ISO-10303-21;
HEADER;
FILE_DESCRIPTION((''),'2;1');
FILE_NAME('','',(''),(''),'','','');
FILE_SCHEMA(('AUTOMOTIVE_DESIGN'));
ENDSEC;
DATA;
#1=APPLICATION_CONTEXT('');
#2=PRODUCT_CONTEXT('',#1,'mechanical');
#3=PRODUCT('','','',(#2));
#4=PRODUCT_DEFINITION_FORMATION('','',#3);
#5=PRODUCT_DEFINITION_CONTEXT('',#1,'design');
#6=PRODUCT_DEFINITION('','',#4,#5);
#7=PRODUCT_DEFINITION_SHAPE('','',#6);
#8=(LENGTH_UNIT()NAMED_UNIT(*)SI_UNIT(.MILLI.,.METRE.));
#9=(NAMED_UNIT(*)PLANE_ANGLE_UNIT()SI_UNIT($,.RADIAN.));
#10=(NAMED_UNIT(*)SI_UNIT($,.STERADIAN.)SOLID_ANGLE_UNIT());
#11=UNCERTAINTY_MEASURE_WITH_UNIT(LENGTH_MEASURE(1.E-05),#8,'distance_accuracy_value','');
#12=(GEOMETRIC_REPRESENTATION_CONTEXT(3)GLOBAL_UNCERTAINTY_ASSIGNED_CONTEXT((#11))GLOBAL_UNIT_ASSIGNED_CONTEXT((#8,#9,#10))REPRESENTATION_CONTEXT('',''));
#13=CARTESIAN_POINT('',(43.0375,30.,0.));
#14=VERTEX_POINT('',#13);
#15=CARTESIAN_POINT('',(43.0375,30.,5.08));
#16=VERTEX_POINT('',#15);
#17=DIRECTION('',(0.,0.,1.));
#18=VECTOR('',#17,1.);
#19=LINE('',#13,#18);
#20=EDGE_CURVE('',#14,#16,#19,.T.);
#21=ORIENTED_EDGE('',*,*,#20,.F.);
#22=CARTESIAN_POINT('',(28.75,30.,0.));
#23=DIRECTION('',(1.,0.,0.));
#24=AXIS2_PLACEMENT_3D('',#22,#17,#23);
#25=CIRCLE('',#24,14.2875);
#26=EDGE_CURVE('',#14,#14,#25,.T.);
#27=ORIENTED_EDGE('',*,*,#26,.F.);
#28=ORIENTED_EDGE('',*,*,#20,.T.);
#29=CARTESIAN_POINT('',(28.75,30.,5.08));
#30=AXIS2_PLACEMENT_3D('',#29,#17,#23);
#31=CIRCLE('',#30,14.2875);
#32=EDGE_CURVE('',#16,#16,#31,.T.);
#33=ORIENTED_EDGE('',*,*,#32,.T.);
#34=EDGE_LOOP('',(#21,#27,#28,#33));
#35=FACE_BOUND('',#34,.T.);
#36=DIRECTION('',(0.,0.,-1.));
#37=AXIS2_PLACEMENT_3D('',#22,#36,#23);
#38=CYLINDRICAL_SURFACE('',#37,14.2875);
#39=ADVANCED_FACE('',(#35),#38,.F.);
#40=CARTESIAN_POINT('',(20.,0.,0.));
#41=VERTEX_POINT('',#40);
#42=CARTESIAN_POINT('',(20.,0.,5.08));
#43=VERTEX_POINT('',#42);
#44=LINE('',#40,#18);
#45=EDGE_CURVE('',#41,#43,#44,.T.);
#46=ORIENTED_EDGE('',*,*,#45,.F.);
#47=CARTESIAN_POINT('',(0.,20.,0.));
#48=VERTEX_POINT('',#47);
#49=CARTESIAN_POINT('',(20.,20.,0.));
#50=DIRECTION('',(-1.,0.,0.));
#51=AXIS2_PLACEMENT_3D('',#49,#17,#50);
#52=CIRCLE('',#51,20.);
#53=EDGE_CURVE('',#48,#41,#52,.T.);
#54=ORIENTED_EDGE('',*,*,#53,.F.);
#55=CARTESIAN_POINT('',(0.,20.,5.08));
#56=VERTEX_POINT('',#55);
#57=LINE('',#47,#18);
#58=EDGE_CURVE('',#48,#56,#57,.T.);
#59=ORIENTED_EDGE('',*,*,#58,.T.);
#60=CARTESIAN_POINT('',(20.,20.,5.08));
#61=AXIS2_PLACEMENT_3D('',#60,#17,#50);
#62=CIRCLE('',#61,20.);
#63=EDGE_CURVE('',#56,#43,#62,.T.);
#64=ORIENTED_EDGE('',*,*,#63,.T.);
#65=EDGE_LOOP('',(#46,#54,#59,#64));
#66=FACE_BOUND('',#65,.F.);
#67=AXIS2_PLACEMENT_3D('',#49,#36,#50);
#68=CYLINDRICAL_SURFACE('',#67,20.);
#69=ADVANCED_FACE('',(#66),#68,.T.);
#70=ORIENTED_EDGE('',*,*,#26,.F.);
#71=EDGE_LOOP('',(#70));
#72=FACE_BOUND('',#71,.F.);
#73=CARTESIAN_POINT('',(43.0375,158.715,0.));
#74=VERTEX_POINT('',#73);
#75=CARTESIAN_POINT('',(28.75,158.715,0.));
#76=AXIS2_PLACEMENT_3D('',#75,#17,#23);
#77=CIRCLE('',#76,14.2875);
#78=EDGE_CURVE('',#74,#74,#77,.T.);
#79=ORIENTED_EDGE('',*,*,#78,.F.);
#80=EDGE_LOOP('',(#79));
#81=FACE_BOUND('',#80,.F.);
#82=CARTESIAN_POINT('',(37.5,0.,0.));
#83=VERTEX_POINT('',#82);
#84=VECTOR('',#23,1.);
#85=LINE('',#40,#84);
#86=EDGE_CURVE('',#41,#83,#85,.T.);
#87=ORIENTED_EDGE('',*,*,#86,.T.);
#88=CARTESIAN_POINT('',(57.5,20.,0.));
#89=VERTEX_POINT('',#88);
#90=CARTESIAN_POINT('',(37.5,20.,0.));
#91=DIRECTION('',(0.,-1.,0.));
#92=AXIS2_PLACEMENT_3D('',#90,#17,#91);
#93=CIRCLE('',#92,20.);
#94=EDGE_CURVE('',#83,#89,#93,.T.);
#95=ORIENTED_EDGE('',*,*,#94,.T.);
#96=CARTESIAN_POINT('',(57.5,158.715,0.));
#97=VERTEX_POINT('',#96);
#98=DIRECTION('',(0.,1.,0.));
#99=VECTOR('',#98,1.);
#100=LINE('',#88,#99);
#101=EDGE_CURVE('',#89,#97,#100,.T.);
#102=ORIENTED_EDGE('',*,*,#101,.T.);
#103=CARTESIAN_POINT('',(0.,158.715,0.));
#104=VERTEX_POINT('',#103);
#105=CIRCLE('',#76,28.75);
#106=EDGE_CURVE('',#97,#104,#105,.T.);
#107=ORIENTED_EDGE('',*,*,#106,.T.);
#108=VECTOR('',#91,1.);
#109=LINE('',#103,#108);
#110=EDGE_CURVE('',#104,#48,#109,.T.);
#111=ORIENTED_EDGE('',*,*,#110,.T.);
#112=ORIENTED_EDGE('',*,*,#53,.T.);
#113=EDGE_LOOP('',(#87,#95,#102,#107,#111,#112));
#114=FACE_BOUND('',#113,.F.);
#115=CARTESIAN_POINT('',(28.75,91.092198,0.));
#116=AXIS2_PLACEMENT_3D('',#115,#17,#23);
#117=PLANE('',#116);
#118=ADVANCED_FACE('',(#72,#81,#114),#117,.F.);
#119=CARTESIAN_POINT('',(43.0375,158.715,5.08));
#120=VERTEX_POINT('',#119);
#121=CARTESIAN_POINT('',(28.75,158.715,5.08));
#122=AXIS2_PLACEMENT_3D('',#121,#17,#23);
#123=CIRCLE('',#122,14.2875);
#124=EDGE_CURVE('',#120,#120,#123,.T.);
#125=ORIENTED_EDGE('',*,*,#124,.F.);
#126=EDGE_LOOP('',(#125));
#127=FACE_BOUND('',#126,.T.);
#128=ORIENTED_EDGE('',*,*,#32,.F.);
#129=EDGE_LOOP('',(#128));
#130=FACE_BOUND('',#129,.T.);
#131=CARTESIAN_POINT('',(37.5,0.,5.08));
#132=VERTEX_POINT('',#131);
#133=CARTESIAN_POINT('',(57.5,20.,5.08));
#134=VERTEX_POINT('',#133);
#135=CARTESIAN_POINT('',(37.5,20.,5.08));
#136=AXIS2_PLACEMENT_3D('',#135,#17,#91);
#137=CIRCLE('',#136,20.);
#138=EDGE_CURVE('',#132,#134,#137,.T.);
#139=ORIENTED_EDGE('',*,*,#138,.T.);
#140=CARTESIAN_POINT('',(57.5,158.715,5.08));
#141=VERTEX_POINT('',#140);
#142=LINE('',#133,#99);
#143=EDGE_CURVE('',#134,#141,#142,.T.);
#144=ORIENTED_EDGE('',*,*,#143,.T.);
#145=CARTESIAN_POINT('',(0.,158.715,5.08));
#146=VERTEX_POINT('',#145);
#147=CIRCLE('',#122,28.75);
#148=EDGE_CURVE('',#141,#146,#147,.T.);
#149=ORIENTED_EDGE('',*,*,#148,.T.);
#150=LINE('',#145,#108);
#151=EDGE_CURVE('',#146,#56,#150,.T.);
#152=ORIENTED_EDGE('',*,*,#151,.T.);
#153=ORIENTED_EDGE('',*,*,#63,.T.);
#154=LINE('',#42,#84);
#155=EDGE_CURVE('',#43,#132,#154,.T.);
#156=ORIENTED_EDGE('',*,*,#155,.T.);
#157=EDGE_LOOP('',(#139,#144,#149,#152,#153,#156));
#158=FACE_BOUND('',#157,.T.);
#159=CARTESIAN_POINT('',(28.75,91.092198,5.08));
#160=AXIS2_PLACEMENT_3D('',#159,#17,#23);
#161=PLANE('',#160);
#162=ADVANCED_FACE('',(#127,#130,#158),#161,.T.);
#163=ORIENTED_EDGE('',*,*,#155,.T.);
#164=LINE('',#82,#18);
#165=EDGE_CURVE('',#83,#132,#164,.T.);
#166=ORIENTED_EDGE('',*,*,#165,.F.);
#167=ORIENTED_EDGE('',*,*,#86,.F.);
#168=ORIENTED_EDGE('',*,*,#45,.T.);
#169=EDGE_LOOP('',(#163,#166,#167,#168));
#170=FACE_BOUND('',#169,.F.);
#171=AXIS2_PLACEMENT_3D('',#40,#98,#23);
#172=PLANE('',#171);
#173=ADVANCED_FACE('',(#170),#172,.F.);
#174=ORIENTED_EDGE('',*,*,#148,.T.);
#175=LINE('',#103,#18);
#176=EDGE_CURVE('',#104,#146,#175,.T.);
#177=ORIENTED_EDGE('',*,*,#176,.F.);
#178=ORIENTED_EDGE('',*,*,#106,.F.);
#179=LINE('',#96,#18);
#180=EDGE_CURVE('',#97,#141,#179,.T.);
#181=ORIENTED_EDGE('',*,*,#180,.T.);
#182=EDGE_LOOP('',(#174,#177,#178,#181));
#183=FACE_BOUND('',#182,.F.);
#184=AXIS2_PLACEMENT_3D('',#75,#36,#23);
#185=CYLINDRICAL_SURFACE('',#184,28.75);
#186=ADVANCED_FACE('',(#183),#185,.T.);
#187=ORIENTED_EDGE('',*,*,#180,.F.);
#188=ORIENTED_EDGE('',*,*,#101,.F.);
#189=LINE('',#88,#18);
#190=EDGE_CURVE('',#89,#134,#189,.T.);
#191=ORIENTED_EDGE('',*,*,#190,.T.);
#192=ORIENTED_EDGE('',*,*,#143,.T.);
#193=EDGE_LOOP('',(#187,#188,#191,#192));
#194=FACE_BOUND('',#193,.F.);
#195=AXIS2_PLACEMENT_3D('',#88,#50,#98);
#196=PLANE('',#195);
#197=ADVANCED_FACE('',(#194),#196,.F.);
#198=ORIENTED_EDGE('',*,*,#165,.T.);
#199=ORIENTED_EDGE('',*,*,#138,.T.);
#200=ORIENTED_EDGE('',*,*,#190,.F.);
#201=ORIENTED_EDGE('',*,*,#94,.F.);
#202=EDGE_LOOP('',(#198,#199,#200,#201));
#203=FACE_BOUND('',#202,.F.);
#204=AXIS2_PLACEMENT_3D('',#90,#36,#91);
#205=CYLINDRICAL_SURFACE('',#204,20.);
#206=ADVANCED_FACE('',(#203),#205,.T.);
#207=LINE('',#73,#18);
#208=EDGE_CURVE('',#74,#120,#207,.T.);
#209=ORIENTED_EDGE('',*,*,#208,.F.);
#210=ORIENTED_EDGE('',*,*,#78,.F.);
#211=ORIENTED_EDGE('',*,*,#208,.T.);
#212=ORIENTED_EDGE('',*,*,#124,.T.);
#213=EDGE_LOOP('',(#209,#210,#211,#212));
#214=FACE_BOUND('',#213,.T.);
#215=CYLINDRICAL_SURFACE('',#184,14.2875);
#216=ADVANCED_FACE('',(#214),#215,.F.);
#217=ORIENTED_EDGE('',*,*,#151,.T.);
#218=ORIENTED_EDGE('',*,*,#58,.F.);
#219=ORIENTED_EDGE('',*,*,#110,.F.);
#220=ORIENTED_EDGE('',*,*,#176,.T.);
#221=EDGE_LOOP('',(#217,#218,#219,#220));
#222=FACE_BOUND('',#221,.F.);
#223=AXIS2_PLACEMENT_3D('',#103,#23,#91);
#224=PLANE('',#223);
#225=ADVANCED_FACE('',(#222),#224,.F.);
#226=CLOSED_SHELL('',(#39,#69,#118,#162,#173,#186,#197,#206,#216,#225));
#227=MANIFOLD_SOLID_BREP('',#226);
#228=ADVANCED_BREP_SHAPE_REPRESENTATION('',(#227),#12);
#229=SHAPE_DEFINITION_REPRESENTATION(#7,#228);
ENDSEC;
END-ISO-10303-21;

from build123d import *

# Parameters (mm, degrees)
F0_R     = 14.2875
F1_DEPTH = 5.08


# Not quite as in the source:
# - a feature names something its author has since deleted; it is built from what else it names


with BuildPart() as f1:
    # F0 (on Top) → F1 (new body)
    with BuildSketch(Plane.XY):
        with BuildLine():
            ThreePointArc((0, 20), (5.8578643763, 5.8578643763), (20, 0))
            Line((20, 0), (37.5, 0))
            ThreePointArc((37.5, 0), (51.6421356237, 5.8578643763), (57.5, 20))
            Line((57.5, 20), (57.5, 158.715))
            ThreePointArc((57.5, 158.715), (28.75, 187.465), (0, 158.715))
            Line((0, 158.715), (0, 20))
        make_face()
        with Locations((28.75, 30)):
            Circle(F0_R, mode=Mode.SUBTRACT)
        with Locations((28.75, 158.715)):
            Circle(F0_R, mode=Mode.SUBTRACT)
    extrude(amount=F1_DEPTH)


solid = f1.part
